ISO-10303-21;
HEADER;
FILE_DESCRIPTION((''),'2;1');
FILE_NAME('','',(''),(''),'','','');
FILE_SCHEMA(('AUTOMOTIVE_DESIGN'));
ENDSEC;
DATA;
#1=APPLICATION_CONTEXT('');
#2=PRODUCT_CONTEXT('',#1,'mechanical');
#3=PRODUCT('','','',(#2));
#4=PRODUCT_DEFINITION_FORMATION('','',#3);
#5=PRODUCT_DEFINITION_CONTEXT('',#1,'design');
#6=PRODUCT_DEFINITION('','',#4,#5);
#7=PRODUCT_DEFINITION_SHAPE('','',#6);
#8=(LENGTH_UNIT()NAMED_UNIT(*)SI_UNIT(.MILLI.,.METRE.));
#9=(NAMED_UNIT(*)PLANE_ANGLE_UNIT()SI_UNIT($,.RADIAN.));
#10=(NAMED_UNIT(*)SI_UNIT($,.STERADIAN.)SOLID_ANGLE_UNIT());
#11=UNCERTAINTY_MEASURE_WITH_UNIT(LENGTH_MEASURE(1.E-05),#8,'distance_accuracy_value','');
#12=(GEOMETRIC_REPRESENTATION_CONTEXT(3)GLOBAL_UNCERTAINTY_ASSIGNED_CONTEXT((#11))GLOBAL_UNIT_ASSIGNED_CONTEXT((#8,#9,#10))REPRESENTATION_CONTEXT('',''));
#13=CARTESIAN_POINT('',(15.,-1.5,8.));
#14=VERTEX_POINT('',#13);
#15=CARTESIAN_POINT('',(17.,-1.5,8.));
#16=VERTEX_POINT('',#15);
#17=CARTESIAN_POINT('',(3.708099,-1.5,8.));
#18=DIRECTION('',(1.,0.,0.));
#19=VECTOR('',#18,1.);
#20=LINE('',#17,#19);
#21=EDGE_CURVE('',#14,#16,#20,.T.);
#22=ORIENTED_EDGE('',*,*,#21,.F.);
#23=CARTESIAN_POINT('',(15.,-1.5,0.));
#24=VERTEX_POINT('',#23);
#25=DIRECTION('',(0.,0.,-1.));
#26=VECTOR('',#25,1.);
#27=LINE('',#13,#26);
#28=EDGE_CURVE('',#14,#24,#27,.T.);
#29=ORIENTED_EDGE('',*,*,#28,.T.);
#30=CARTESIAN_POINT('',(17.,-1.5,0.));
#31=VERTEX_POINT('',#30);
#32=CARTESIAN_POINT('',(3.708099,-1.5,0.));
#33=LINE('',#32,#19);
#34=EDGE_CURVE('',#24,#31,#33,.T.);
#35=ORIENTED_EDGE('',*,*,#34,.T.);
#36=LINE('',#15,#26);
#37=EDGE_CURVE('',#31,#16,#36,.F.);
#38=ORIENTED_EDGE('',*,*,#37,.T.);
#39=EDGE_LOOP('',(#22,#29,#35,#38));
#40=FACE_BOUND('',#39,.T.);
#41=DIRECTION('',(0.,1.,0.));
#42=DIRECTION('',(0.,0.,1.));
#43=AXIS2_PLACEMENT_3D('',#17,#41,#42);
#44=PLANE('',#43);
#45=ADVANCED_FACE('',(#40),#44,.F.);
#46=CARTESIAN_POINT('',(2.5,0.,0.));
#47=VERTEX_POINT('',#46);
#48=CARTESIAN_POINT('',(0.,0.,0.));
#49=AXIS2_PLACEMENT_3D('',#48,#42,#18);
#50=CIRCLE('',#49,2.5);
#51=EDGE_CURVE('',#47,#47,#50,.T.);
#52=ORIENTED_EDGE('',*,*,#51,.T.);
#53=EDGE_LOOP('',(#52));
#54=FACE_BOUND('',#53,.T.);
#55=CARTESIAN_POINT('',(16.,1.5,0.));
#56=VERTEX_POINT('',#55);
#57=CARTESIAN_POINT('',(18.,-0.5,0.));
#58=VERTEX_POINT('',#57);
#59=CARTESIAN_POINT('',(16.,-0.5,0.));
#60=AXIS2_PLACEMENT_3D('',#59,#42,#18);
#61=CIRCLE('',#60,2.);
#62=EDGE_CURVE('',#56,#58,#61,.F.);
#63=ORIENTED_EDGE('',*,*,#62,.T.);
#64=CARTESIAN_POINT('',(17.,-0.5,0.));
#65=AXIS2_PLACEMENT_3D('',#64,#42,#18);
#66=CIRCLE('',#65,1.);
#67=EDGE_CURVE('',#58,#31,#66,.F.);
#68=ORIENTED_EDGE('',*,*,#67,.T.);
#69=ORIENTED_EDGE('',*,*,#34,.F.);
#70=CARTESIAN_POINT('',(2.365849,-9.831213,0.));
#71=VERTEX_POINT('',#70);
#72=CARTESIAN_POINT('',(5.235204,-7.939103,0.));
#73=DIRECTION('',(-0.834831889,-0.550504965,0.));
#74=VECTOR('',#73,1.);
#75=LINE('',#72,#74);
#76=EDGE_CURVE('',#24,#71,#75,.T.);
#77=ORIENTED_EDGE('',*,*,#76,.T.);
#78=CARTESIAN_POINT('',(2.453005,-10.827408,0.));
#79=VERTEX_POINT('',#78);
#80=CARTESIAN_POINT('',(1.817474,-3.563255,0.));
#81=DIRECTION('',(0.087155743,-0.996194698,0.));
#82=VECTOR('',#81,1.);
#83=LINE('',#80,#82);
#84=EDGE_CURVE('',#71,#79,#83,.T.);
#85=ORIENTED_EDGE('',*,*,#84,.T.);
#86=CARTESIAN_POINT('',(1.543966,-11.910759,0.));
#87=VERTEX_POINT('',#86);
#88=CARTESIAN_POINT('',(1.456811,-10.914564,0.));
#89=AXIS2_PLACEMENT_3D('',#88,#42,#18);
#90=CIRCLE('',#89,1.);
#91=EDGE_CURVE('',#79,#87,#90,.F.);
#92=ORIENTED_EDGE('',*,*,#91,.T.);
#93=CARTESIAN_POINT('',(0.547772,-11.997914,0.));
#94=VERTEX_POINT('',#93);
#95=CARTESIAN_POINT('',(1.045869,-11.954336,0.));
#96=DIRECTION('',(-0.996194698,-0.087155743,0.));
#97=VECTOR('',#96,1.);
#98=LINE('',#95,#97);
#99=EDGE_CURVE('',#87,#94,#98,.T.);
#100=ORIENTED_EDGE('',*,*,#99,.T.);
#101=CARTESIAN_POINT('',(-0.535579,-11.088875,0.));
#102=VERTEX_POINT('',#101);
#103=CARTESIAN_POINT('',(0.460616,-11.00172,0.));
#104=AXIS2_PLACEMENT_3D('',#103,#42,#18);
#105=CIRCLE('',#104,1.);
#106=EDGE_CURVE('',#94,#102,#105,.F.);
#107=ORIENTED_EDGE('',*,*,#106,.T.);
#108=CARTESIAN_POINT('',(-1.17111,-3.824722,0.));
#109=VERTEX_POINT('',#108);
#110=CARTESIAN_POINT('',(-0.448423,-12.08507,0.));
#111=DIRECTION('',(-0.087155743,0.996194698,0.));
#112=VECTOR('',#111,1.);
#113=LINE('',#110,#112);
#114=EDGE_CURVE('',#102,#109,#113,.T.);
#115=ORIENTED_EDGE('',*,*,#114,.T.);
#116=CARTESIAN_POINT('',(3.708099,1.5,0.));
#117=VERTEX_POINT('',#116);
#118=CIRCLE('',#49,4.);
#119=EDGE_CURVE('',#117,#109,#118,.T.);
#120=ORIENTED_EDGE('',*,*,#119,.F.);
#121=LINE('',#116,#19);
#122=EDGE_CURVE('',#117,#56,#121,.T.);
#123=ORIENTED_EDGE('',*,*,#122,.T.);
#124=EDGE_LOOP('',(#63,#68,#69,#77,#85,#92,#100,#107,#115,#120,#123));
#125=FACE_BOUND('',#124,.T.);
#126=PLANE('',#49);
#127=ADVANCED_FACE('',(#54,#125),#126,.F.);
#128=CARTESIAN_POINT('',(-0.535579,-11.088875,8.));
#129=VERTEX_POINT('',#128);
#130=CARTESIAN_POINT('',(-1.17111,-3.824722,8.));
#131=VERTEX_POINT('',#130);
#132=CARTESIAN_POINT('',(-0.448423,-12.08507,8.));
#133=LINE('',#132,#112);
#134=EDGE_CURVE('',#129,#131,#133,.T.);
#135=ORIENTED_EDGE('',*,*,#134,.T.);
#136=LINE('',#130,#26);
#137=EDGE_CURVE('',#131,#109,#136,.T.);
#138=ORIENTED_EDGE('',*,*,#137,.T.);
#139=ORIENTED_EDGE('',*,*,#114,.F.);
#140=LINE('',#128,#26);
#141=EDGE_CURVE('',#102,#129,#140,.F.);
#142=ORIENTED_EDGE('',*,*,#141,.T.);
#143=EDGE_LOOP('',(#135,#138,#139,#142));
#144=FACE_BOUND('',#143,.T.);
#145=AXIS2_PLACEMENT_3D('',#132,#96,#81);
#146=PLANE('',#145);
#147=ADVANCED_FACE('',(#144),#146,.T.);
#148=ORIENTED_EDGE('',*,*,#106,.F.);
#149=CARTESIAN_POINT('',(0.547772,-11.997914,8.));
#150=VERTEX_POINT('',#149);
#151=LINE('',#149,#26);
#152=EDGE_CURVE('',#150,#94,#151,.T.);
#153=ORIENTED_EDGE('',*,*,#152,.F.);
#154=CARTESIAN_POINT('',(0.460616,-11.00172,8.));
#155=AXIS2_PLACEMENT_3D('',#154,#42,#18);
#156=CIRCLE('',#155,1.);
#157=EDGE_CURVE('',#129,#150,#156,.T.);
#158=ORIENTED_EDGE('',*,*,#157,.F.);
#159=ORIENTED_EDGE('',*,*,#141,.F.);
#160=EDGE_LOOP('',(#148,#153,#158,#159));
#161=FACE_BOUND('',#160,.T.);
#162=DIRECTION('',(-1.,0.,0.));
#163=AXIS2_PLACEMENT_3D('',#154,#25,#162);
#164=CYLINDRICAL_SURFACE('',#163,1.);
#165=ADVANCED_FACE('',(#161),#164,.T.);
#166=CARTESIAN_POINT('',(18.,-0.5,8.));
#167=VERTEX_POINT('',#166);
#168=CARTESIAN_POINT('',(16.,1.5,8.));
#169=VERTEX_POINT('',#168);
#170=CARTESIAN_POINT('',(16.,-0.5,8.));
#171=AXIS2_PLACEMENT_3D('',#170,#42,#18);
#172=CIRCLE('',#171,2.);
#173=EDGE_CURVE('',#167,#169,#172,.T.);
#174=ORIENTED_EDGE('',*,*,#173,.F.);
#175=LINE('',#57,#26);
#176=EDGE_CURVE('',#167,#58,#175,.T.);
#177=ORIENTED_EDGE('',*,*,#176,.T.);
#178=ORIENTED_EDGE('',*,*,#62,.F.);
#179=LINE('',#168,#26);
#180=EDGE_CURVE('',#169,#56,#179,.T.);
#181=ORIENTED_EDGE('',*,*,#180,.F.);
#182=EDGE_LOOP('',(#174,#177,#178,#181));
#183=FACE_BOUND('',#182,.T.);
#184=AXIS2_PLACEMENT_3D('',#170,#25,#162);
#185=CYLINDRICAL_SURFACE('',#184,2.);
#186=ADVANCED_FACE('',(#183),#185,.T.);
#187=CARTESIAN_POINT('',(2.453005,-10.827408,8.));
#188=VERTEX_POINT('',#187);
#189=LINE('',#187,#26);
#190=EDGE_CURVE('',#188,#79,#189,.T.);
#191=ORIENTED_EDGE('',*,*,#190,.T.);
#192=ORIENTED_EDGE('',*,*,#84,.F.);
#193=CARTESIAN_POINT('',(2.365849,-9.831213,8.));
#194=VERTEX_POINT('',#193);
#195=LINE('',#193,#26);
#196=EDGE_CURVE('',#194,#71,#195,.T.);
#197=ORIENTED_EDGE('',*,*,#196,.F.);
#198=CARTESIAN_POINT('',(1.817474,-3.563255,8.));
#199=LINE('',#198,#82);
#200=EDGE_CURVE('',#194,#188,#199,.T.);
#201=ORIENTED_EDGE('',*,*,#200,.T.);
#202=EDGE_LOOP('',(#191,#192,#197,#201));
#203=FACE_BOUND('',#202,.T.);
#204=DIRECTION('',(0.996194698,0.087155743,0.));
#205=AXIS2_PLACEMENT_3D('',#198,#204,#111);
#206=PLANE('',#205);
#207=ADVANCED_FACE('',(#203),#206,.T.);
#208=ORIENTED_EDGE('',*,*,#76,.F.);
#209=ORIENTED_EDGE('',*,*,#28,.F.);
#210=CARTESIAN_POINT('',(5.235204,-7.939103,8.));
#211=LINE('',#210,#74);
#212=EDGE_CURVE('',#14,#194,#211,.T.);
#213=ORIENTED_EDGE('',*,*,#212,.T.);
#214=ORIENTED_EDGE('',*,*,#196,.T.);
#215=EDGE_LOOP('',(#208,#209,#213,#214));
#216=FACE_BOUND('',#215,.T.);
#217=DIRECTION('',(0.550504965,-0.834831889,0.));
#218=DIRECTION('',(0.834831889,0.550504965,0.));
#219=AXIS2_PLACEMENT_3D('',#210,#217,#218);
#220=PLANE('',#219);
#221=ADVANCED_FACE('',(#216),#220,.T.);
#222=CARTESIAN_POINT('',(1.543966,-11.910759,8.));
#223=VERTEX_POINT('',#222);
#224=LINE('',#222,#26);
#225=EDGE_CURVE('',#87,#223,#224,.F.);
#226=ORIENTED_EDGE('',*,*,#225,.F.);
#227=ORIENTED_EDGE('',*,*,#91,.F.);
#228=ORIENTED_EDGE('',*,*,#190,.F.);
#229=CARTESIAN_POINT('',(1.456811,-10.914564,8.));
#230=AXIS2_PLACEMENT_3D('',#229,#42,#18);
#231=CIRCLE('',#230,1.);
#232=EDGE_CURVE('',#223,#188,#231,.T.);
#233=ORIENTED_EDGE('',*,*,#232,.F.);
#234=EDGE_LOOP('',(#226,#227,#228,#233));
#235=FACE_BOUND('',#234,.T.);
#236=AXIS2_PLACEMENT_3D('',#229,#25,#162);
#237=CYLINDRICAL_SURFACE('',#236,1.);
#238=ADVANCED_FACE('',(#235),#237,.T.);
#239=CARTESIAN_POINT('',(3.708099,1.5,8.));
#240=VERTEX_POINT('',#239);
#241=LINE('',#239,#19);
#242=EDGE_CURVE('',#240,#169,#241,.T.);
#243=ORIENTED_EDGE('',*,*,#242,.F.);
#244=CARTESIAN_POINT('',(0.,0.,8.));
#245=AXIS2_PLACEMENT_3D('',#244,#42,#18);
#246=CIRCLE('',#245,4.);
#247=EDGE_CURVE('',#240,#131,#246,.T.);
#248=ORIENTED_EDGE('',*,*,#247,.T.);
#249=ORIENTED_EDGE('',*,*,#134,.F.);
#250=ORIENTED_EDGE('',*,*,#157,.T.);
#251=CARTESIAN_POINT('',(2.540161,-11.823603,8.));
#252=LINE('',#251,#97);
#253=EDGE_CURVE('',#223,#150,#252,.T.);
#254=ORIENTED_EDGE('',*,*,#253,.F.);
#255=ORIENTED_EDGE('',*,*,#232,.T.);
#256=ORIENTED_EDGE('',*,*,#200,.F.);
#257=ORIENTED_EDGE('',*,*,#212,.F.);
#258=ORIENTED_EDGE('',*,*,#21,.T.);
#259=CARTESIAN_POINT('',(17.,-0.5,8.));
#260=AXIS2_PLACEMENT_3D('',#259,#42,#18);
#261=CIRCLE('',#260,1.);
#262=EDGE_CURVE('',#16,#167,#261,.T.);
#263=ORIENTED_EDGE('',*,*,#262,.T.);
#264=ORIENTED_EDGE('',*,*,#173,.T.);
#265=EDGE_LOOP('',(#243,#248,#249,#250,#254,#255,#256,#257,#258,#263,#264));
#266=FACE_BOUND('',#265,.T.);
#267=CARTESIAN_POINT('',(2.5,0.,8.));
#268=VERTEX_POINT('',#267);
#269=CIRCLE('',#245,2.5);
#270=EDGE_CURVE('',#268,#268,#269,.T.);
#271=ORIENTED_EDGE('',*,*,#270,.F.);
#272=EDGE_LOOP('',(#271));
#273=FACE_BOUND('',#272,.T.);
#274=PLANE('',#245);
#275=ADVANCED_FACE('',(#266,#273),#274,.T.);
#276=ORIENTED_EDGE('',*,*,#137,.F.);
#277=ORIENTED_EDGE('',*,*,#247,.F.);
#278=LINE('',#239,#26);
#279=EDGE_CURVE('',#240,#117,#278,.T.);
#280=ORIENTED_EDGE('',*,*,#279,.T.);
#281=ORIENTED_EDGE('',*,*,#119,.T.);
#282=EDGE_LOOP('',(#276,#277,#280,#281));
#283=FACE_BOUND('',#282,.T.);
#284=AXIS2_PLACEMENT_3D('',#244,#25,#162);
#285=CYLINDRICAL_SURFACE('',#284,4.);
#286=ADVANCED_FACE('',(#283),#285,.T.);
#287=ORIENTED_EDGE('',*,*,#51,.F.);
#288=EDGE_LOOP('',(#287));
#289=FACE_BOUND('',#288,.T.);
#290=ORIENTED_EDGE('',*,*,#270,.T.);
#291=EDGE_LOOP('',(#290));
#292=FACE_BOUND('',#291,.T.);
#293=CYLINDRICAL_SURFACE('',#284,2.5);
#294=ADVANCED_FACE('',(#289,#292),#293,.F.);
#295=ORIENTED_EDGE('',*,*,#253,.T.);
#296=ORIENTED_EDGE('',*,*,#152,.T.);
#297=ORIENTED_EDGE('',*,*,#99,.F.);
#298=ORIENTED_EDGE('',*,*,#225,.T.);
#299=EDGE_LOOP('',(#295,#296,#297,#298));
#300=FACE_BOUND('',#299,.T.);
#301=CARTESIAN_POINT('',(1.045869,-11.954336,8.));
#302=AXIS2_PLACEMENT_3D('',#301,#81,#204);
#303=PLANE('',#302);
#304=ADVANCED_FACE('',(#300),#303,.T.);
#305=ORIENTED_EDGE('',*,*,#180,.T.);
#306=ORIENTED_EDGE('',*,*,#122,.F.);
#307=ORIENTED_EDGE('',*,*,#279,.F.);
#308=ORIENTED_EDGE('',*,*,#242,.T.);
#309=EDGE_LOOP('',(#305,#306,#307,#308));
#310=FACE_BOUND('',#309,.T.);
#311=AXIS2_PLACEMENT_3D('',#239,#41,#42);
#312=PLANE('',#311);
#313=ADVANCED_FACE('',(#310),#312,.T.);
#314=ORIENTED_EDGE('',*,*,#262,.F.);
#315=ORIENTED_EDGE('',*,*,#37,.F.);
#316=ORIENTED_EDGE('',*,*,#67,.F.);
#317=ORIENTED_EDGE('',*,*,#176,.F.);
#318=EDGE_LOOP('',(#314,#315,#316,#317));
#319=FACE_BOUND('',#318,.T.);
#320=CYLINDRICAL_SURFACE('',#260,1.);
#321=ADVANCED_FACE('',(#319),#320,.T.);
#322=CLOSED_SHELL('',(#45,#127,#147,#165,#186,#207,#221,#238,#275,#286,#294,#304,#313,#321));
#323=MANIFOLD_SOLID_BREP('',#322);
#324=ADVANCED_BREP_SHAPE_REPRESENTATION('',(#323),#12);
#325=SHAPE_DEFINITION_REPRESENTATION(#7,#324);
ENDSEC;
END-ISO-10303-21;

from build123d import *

# Parameters (mm, degrees)
SKETCH1_R           = 2.5
BOSS_EXTRUDE1_DEPTH = 8
FILLET1_R           = 1
FILLET2_R           = 2


with BuildPart() as part:
    # Sketch1 → Boss-Extrude1 (new body)
    with BuildSketch(Plane.XY):
        with BuildLine():
            Line((-0.448423134, -12.085069991), (2.54016096, -11.823602763))
            Line((2.54016096, -11.823602763), (2.365849475, -9.831213367))
            Line((2.365849475, -9.831213367), (15, -1.5))
            Line((15, -1.5), (18, -1.5))
            Line((18, -1.5), (18, 1.5))
            Line((18, 1.5), (3.708099244, 1.5))
            ThreePointArc((3.708099244, 1.5), (-2.949109347, 2.70236083), (-1.171109903, -3.824722421))
            Line((-1.171109903, -3.824722421), (-0.448423134, -12.085069991))
        make_face()
        Circle(SKETCH1_R, mode=Mode.SUBTRACT)
    extrude(amount=BOSS_EXTRUDE1_DEPTH)

    # Fillet1
    fillet1_edges = [part.edges().sort_by_distance(p)[0] for p in [
        (2.54016096, -11.823602763, 4),
        (18, -1.5, 4),
        (-0.448423134, -12.085069991, 4),
    ]]
    fillet(fillet1_edges, radius=FILLET1_R)

    # Fillet2
    fillet2_edges = [part.edges().sort_by_distance(p)[0] for p in [
        (18, 1.5, 4),
    ]]
    fillet(fillet2_edges, radius=FILLET2_R - 0.0001)  # a hair under: the kernel refuses the full size


solid = part.part
